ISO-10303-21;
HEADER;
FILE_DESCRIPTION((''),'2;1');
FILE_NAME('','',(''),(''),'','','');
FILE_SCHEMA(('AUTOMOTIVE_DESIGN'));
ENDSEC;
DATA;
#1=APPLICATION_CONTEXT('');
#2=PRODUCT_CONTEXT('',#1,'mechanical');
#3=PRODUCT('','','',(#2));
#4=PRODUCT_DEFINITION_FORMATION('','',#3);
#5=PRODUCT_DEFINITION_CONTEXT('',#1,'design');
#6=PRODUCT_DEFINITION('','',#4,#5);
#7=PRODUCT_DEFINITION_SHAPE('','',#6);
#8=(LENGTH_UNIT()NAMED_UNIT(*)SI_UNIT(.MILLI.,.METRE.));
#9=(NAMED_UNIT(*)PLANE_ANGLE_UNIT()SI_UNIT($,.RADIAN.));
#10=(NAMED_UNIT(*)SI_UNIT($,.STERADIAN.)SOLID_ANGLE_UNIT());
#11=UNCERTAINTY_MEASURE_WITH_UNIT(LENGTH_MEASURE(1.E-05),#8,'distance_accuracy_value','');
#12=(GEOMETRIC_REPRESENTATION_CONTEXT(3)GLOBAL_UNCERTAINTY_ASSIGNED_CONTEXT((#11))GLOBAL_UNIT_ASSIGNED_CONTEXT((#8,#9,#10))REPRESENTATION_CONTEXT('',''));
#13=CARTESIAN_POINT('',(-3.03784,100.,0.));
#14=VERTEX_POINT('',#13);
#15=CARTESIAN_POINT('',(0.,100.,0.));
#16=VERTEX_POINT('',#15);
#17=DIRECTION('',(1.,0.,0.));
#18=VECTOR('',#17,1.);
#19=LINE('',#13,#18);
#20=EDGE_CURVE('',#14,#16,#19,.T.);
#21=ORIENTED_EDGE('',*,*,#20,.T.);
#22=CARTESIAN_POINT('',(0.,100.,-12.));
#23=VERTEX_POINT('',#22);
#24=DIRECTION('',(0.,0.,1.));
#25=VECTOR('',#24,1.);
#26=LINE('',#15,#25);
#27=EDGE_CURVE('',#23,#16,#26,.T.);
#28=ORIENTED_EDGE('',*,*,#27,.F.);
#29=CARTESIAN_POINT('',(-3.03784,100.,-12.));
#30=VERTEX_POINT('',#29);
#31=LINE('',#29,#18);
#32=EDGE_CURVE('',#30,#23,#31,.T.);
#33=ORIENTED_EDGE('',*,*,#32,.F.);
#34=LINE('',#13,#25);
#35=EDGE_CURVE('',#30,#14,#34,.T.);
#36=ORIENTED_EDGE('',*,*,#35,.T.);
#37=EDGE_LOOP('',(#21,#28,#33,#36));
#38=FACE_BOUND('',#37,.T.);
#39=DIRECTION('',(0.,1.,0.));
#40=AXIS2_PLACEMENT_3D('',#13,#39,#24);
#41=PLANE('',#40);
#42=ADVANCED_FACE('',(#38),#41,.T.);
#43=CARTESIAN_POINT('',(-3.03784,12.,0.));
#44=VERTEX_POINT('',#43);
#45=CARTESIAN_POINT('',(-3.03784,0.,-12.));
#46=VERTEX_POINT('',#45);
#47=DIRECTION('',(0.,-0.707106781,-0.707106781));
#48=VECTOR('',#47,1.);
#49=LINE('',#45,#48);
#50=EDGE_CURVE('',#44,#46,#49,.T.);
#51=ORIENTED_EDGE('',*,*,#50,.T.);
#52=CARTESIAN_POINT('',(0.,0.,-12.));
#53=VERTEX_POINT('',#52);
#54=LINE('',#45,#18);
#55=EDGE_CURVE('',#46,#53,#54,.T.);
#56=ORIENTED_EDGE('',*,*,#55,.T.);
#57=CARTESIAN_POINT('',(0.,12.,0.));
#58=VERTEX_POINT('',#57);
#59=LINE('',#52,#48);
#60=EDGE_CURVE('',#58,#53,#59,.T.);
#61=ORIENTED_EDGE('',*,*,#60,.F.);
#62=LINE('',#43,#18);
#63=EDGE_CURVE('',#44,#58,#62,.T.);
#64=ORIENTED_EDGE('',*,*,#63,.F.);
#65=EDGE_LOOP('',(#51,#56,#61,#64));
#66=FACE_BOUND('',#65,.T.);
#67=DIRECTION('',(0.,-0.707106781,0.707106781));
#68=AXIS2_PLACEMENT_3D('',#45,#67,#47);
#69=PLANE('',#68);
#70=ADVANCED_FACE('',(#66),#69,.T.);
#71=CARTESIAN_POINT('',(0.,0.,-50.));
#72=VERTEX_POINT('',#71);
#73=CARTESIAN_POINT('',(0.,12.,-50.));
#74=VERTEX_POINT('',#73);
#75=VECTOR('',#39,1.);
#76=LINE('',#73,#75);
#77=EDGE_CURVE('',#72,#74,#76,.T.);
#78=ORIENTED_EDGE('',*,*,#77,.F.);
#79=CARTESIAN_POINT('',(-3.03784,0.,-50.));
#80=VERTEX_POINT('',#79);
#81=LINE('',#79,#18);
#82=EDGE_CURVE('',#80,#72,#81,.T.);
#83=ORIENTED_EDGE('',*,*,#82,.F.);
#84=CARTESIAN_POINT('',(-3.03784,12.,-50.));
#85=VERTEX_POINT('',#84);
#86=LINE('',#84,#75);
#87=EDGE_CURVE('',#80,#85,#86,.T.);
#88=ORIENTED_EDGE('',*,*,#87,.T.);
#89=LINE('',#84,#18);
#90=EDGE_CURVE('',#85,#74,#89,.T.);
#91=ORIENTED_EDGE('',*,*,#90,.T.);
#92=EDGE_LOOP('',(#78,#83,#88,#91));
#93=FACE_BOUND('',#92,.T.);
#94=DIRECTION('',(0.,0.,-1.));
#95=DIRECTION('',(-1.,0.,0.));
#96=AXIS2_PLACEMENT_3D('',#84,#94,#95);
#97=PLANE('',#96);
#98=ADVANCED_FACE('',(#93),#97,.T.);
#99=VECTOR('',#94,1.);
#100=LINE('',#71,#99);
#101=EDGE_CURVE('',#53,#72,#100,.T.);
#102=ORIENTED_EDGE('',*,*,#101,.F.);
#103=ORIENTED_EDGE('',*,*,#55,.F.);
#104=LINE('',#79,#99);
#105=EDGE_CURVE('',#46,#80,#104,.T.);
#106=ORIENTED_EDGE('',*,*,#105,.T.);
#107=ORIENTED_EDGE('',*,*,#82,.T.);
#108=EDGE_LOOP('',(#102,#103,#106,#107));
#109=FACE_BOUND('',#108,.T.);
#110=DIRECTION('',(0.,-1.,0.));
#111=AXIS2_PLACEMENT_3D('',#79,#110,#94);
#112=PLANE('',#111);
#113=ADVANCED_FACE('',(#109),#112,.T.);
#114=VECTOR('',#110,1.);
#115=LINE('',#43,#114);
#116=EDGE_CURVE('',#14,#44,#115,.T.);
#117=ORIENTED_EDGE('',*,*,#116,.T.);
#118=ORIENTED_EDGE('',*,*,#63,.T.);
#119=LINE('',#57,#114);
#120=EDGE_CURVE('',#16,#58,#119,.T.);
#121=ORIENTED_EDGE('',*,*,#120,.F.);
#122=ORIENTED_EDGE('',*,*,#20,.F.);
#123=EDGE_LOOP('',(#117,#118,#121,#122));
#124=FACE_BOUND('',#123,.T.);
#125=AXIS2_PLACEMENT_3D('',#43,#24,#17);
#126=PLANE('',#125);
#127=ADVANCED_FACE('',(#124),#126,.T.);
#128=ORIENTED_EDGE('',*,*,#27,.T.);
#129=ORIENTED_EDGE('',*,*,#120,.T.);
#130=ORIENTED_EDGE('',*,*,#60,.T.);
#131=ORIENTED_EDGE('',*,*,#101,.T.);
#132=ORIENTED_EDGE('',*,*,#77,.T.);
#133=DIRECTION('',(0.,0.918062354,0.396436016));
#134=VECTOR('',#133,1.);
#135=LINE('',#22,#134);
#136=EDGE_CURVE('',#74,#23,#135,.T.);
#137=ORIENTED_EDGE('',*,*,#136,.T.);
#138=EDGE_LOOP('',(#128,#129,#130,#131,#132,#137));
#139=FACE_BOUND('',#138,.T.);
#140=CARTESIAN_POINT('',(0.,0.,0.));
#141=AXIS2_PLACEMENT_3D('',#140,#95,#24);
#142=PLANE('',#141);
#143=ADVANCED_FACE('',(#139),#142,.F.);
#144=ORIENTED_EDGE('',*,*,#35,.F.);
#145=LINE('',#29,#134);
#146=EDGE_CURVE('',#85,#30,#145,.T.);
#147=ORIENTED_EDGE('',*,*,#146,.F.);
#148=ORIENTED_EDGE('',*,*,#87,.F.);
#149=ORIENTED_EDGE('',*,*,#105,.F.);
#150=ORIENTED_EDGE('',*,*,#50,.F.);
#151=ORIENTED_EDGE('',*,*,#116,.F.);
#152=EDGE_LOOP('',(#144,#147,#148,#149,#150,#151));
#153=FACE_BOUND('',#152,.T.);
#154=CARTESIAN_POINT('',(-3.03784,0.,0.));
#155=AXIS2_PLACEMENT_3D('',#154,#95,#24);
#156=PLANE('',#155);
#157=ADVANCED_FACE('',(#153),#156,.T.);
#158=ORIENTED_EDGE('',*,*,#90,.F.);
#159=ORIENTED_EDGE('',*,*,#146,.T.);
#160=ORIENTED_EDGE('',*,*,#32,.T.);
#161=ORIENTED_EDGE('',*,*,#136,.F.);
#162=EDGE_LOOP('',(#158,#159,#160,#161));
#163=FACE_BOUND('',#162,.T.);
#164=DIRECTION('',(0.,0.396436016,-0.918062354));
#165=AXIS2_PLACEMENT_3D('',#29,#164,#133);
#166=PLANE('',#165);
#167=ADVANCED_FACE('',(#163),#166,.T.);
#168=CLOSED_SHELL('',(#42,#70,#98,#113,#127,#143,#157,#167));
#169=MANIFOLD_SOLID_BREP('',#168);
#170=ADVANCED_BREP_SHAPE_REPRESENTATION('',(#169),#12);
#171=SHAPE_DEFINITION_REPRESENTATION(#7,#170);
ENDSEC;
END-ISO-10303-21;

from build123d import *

# Parameters (mm, degrees)
BASE_FLANGE1_DEPTH = 3.03784


# Sheet-metal steps are written as plain solids
with BuildPart() as part:
    # Sketch1 → Base-Flange1 (new body)
    with BuildSketch(Plane(origin=(0, 0, 0), x_dir=(0, 0, -1), z_dir=(1, 0, 0))):
        Polygon((12, 0), (0, 12), (0, 100), (12, 100), (50, 12), (50, 0), align=None)
    extrude(amount=-BASE_FLANGE1_DEPTH)


solid = part.part
